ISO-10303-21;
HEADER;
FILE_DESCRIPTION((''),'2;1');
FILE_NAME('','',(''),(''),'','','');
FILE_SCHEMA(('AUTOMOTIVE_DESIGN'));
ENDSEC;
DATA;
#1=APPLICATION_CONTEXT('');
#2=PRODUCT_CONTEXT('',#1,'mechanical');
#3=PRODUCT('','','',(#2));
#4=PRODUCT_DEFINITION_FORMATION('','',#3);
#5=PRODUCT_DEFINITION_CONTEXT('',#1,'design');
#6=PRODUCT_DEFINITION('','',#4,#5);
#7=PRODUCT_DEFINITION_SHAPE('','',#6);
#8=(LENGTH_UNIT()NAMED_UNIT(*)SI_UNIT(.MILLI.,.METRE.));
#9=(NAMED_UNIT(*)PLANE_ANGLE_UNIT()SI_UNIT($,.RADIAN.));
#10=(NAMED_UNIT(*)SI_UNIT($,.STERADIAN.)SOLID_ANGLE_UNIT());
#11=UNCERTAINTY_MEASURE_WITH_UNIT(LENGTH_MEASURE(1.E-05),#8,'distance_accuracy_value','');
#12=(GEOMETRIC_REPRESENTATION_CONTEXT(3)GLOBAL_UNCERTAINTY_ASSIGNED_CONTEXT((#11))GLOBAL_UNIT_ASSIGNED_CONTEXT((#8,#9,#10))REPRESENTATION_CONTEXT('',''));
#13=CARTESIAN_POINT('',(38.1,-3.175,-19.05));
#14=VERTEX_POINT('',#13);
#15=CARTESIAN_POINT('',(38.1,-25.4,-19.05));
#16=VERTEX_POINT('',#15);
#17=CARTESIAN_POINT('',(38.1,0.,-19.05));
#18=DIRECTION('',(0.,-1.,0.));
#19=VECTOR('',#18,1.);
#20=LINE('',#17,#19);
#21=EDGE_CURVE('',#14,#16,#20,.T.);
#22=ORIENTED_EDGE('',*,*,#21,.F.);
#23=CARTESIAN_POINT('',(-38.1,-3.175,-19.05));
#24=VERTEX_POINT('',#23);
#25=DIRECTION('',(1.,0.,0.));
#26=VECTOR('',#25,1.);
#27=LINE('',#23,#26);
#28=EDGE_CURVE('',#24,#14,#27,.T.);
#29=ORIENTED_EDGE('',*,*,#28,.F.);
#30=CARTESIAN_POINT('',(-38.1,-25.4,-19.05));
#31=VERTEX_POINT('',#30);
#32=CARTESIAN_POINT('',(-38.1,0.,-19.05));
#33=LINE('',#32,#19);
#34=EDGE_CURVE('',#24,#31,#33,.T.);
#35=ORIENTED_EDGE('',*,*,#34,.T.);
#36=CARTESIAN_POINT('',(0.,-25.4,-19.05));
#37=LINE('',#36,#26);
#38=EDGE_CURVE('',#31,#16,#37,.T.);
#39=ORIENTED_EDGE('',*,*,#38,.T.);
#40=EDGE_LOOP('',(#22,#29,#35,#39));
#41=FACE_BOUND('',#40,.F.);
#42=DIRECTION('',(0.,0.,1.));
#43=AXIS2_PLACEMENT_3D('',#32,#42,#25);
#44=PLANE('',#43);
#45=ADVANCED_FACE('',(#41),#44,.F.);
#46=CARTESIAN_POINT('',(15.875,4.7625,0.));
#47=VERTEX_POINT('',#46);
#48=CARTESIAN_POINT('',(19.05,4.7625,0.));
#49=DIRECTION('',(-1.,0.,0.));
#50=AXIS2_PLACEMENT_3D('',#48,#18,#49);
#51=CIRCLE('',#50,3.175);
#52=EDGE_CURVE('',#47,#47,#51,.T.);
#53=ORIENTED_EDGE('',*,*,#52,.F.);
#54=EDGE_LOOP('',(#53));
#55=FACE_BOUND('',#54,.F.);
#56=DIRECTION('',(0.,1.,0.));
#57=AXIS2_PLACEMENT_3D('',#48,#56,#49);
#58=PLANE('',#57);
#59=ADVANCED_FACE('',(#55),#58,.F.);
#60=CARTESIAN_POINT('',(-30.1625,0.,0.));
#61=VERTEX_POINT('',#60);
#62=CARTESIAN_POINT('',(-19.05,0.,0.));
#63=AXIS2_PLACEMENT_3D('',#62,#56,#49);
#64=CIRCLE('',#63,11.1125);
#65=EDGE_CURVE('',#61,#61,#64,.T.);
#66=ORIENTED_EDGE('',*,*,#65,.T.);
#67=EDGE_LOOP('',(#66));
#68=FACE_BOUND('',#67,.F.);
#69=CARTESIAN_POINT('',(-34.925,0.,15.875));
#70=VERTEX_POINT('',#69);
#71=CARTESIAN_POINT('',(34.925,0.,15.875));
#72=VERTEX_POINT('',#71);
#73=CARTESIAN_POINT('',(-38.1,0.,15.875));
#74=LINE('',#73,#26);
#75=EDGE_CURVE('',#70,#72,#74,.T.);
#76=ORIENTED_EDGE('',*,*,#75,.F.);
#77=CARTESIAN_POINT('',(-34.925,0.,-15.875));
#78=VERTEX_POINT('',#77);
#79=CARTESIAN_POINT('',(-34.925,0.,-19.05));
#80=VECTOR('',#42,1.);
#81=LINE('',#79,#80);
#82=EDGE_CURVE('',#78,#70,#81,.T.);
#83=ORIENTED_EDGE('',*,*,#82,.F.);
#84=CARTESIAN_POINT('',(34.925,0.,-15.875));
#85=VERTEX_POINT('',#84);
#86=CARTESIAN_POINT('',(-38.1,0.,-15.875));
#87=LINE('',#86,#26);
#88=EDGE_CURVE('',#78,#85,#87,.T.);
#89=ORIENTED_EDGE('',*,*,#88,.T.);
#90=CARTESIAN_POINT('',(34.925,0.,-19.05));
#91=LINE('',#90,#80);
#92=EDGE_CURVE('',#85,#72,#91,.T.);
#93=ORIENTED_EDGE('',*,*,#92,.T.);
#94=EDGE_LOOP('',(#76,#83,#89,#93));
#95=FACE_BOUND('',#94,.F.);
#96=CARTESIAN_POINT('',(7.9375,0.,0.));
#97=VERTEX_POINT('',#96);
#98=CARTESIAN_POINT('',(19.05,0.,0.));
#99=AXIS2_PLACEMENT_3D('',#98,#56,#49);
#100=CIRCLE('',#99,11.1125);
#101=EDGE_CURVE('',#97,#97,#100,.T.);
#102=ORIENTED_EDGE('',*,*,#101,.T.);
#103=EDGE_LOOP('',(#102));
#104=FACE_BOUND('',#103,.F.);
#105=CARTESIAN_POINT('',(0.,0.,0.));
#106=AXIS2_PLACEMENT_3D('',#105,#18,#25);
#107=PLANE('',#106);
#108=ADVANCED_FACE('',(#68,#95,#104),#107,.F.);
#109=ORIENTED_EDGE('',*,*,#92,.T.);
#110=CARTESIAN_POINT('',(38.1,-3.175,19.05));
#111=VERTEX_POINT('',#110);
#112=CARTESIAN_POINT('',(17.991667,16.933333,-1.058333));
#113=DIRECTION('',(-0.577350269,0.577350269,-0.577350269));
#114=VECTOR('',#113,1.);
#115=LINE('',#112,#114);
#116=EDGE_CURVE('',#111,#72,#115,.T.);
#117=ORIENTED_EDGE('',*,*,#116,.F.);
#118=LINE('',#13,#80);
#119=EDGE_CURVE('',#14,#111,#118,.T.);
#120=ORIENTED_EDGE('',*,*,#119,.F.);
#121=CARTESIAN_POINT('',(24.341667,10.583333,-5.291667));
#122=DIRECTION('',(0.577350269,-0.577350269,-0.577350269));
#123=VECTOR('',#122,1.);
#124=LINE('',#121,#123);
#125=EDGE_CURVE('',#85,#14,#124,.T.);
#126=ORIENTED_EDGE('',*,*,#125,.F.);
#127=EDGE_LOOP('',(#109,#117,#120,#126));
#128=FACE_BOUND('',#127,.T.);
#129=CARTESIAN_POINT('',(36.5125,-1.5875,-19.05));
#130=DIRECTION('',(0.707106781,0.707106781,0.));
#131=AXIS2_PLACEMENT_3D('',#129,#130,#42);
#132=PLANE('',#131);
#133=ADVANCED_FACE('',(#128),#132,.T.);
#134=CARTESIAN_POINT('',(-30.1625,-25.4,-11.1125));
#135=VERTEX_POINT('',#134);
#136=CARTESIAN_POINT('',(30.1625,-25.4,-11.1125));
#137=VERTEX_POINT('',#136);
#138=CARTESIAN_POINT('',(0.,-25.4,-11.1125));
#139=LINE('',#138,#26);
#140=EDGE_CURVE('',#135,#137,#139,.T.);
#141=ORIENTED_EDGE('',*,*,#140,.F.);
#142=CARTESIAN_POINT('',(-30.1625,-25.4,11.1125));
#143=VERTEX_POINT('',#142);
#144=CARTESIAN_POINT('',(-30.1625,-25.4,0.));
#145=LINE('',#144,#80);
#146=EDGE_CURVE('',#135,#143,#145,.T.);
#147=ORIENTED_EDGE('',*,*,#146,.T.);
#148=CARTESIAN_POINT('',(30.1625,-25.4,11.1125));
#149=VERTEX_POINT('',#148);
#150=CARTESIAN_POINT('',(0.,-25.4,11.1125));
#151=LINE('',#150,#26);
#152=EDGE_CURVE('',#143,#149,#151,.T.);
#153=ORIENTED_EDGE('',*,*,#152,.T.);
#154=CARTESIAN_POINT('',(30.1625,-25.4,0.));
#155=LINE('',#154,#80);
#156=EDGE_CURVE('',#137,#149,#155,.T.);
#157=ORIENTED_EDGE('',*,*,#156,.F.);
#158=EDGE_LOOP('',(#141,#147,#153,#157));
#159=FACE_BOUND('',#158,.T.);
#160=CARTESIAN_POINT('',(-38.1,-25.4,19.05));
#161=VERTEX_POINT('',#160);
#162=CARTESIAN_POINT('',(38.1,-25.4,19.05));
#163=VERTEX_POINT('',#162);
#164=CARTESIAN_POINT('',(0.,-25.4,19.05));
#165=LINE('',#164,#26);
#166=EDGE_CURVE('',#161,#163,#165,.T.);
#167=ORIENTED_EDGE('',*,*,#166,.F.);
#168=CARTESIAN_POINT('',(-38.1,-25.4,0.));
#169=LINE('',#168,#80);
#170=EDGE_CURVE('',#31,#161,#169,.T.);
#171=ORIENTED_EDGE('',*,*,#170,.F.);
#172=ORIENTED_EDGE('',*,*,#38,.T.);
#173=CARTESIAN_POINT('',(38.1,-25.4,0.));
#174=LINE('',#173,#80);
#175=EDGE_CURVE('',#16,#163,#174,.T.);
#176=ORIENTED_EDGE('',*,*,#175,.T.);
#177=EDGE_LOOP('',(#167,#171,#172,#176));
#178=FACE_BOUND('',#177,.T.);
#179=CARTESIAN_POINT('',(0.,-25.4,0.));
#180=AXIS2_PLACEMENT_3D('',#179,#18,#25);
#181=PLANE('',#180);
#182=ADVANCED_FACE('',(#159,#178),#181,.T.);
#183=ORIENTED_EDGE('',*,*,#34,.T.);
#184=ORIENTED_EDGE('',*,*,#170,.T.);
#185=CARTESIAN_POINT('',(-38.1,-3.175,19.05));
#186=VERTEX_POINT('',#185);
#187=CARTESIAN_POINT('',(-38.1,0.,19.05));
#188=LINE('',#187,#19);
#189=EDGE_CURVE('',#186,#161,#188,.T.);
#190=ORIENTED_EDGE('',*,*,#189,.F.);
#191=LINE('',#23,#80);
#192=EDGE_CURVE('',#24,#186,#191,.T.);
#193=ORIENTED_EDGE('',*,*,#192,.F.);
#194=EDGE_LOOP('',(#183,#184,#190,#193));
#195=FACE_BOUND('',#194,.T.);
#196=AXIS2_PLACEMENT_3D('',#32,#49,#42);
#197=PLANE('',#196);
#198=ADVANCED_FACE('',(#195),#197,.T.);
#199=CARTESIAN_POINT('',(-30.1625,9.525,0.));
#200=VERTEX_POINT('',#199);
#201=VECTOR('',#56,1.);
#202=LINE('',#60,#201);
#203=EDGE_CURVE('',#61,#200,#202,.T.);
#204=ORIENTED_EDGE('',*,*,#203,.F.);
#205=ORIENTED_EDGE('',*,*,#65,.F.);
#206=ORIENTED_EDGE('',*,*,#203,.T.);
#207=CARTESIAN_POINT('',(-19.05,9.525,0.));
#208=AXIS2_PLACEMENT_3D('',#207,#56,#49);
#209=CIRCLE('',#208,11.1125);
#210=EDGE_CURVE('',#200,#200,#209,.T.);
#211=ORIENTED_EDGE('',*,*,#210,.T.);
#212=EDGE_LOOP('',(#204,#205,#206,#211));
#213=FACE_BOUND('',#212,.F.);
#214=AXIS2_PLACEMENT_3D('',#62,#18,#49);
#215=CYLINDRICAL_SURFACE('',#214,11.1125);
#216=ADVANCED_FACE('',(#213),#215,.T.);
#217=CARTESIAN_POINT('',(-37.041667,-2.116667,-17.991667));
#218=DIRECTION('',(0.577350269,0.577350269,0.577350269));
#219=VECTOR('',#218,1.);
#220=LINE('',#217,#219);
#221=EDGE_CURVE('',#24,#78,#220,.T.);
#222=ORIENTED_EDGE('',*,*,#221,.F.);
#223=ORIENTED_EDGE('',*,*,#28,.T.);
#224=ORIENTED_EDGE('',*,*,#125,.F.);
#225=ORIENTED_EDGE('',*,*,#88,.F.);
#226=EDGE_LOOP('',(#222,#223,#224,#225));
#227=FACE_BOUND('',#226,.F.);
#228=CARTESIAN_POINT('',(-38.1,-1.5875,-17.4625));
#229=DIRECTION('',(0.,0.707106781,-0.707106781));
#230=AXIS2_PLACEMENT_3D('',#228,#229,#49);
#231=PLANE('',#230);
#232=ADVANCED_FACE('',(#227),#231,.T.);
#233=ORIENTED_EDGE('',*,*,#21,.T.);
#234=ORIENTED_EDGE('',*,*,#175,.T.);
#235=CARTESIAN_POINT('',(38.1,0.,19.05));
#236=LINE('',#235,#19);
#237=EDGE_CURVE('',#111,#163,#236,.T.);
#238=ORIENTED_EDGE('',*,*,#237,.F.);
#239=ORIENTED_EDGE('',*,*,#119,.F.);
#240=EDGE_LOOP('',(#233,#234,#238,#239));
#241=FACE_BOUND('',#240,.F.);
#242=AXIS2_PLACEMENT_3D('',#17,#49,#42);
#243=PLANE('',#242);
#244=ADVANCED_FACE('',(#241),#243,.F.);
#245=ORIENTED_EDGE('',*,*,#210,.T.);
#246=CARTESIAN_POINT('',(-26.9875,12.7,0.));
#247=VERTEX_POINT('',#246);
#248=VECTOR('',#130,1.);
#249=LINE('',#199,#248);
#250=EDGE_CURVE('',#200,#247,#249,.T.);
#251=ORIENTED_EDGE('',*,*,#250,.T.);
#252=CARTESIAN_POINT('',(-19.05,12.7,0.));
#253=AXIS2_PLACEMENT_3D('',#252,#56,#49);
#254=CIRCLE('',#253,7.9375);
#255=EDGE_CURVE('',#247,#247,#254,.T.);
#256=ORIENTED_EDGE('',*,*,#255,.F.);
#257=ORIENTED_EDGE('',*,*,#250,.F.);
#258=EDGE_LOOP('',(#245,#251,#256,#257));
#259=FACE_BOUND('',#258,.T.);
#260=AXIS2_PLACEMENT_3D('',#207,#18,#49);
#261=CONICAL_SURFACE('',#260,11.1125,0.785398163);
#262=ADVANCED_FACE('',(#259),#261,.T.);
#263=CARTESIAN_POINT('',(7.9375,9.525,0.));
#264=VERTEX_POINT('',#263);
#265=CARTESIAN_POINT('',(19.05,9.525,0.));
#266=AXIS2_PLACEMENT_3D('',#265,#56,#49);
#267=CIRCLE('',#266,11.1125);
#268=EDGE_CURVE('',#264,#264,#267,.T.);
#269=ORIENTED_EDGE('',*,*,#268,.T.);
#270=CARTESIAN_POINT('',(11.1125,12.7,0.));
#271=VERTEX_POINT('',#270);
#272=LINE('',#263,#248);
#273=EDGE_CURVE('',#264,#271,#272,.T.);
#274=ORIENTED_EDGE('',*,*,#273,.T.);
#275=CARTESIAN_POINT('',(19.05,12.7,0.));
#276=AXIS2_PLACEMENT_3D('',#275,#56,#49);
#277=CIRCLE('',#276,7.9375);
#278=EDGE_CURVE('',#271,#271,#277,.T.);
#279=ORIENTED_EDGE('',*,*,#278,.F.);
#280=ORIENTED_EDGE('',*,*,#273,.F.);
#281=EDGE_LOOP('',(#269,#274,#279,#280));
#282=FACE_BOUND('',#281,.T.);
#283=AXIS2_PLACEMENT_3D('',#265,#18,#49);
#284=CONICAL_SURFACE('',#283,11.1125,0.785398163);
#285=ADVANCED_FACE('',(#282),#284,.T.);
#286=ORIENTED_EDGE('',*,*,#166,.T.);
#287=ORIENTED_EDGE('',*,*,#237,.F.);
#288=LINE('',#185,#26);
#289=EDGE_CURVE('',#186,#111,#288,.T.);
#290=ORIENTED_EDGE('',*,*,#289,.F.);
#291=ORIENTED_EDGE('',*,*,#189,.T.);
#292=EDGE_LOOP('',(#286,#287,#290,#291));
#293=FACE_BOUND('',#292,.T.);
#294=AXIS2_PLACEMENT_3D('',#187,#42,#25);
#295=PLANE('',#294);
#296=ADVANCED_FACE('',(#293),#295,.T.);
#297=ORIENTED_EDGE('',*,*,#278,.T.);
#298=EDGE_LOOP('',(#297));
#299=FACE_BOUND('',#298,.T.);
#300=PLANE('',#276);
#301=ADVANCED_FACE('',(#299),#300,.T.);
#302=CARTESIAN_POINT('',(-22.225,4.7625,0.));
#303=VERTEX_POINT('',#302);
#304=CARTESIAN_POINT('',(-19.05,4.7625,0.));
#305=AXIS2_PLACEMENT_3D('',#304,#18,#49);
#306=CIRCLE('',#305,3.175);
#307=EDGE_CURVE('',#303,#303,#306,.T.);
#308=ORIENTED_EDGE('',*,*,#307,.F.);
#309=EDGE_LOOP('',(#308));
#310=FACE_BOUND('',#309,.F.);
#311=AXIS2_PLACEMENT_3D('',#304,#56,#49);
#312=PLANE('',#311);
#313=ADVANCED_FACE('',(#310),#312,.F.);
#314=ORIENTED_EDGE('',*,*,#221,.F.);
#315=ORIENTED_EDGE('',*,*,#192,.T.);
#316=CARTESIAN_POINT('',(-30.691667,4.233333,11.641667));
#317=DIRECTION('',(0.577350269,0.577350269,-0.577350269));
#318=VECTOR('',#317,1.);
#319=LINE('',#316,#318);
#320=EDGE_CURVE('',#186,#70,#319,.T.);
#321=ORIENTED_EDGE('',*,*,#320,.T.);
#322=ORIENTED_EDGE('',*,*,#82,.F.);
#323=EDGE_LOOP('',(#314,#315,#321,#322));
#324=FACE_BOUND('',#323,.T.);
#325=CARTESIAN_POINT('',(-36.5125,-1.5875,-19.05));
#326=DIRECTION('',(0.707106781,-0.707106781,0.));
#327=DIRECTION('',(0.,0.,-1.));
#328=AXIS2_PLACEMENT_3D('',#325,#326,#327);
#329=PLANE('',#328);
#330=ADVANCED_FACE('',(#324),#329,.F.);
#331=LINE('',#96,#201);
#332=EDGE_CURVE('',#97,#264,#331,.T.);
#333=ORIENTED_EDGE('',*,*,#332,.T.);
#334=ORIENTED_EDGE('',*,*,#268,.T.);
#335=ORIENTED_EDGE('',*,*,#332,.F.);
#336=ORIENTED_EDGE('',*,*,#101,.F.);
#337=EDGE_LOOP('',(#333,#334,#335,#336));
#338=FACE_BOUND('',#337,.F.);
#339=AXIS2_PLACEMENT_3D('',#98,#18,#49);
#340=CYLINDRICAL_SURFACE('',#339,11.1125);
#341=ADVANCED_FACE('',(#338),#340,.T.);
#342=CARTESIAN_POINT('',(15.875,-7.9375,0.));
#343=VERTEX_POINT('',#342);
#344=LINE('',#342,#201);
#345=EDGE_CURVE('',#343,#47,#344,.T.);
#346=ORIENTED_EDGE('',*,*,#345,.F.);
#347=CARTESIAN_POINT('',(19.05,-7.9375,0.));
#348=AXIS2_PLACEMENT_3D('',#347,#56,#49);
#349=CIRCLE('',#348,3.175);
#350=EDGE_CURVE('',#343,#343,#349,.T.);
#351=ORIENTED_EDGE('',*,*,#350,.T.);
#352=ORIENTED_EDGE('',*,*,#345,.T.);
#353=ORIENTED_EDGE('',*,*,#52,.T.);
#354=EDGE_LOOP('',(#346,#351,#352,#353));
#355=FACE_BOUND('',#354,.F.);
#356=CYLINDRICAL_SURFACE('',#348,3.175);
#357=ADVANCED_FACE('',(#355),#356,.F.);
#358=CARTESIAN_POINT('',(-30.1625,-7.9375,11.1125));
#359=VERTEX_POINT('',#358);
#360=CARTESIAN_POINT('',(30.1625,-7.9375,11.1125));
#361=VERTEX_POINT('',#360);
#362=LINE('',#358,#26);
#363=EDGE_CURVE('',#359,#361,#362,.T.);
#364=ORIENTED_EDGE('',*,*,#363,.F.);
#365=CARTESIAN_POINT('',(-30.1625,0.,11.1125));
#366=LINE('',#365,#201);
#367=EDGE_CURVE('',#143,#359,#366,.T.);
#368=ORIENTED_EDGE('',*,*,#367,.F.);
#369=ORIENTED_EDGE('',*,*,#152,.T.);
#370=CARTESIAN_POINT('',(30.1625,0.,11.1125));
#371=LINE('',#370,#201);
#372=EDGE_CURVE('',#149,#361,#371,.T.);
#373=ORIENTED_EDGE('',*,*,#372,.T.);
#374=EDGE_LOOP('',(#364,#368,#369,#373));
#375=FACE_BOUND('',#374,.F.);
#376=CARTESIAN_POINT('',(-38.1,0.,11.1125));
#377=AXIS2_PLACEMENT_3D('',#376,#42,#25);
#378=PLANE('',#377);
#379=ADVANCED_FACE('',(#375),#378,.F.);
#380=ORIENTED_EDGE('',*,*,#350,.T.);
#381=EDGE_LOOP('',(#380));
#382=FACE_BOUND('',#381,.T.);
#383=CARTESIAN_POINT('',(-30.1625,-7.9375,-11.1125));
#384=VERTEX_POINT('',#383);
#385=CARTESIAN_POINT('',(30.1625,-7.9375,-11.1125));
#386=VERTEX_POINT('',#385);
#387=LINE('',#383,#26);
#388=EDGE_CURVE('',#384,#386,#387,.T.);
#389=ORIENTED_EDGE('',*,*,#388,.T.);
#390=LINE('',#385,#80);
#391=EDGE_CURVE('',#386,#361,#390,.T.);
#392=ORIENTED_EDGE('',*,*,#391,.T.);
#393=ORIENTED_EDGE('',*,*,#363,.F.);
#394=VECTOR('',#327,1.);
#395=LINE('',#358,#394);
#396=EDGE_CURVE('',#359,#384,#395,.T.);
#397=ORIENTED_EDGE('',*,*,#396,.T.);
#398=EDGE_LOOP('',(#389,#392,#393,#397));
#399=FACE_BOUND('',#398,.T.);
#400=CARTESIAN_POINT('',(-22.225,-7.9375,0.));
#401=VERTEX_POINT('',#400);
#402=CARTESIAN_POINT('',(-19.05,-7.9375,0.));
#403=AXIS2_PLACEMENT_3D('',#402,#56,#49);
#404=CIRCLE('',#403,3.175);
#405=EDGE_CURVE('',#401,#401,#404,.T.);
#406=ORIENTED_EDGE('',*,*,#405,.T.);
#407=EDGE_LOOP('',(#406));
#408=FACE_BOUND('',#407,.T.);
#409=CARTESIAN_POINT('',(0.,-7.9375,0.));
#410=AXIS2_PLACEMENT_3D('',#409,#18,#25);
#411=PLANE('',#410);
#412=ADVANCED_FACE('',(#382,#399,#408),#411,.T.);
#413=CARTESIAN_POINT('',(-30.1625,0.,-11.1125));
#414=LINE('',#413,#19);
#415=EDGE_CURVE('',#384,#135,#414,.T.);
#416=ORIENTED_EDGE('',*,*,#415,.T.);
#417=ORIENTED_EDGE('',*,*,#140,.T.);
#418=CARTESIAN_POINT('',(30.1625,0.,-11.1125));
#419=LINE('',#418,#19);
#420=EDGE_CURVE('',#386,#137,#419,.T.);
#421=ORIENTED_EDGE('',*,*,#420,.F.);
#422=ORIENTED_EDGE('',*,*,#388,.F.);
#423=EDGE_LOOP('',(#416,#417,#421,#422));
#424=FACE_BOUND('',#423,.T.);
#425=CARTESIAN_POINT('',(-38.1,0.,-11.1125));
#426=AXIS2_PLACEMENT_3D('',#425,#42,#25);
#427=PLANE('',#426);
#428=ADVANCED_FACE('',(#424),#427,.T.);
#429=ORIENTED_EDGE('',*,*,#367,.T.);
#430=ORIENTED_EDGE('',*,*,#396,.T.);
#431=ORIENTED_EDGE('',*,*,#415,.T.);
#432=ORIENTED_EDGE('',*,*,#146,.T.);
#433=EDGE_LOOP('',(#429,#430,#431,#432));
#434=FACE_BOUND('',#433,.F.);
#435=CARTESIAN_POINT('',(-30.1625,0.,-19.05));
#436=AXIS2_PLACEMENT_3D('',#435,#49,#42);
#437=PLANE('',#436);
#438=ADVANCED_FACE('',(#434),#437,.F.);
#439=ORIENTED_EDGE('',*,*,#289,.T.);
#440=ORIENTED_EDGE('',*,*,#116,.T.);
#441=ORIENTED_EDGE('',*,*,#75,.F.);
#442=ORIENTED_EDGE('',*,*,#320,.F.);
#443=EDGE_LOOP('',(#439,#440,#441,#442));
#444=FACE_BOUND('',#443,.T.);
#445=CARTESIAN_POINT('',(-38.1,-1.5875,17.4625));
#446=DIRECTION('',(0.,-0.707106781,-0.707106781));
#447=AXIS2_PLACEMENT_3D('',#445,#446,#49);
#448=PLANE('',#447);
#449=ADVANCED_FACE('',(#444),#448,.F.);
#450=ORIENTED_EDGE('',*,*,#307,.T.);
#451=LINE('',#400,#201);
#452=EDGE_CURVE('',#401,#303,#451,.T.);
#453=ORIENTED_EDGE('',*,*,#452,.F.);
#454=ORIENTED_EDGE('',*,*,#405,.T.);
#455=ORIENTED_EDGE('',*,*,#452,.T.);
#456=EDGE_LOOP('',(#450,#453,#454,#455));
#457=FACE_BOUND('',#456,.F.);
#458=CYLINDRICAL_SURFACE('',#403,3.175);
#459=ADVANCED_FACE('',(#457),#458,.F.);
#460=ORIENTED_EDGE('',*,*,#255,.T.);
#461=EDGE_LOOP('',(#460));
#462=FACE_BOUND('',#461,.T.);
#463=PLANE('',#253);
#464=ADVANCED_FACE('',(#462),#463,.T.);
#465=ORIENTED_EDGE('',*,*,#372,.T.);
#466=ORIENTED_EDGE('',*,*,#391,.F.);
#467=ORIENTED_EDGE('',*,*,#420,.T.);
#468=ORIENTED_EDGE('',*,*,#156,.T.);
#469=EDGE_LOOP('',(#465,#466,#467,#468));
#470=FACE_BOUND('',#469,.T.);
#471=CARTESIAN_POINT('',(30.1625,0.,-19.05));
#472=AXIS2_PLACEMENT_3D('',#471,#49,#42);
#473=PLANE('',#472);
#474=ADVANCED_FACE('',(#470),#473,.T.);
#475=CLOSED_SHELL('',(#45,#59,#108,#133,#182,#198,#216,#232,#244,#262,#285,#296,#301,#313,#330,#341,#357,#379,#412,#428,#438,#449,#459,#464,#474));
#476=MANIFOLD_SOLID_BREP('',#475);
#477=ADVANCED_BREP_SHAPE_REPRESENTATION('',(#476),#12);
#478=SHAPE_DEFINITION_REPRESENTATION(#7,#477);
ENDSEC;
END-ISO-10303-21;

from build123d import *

# Parameters (mm, degrees)
F0_W     = 76.2
F0_H     = 38.1
F1_DEPTH = 25.4
F2_R     = 11.1125
F3_DEPTH = 12.7
F4_SIZE2 = 3.175
F4_SIZE  = 3.175
F5_T     = 7.9375


# Not quite as in the source:
# - a shell that OpenCascade refuses in one call is made with other operations: the cavity is built on its own and cut out


with BuildPart() as f1:
    # F0 (on Front) → F1 (new body)
    with BuildSketch(Plane.XZ):
        Rectangle(F0_W, F0_H)
    extrude(amount=F1_DEPTH)

    # F2 (on face) → F3 (join)
    with BuildSketch(Plane(origin=(0, 0, 0), x_dir=(-1, 0, 0), z_dir=(0, 1, 0))):
        with Locations((-19.05, 0)):
            Circle(F2_R)
        with Locations((19.05, 0)):
            Circle(F2_R)
    extrude(amount=F3_DEPTH)

    # F4
    f4_edges = [f1.edges().sort_by_distance(p)[0] for p in [
        (-7.9375, 12.7, 0),
        (30.1625, 12.7, 0),
        (0, 0, 19.05),
        (38.1, 0, 0),
        (-38.1, 0, 0),
        (0, 0, -19.05),
    ]]
    chamfer(f4_edges, length=F4_SIZE, length2=F4_SIZE2)

    # F5: shell of thickness 7.9375, made by hand


with BuildPart() as f5_core1:
    # F5_t2: copy of F1
    add(f1.part)

    # the walls: a layer under each face that stays
    f5_faces = [f5_core1.faces().sort_by_distance(p)[0] for p in [
        (0, -14.2875, -19.05),
        (-38.1, -14.2875, 0),
        (0, -1.5875, -17.4625),
        (38.1, -14.2875, 0),
        (0, -14.2875, 19.05),
        (-36.5125, -1.5875, 0),
        (0, 0, 0),
        (36.5125, -1.5875, 0),
        (0, -1.5875, 17.4625),
        (-7.9375, 4.7625, 0),
        (30.1625, 4.7625, 0),
        (-9.525, 11.1125, 0),
        (28.575, 11.1125, 0),
        (-19.05, 12.7, 0),
        (19.05, 12.7, 0),
    ]]
    thicken(f5_faces, amount=-F5_T, mode=Mode.SUBTRACT)

    # F5_s3 → F5_t4 (revolve, cut)
    with BuildSketch(Plane.XY):
        Polygon((-30.241875, 0.079375), (-30.1625, -7.9375), (-22.225, -7.9375), (-22.225, 0), align=None)
    revolve(axis=Axis((-19.05, 0, 0), (0, 1, 0)), mode=Mode.SUBTRACT)

    # F5_s5 → F5_t6 (revolve, cut)
    with BuildSketch(Plane.XY):
        Polygon((7.858125, 0.079375), (7.9375, -7.9375), (15.875, -7.9375), (15.875, 0), align=None)
    revolve(axis=Axis((19.05, 0, 0), (0, 1, 0)), mode=Mode.SUBTRACT)


with BuildPart() as f1_1:
    add(f1.part)

    # what is left inside the walls is the cavity
    f5_cavity = [f5_core1.part.solids().sort_by_distance(p)[0] for p in [
        (0, -25.320625, -3.704167),
    ]]
    add(f5_cavity, mode=Mode.SUBTRACT)


solid = f1_1.part
